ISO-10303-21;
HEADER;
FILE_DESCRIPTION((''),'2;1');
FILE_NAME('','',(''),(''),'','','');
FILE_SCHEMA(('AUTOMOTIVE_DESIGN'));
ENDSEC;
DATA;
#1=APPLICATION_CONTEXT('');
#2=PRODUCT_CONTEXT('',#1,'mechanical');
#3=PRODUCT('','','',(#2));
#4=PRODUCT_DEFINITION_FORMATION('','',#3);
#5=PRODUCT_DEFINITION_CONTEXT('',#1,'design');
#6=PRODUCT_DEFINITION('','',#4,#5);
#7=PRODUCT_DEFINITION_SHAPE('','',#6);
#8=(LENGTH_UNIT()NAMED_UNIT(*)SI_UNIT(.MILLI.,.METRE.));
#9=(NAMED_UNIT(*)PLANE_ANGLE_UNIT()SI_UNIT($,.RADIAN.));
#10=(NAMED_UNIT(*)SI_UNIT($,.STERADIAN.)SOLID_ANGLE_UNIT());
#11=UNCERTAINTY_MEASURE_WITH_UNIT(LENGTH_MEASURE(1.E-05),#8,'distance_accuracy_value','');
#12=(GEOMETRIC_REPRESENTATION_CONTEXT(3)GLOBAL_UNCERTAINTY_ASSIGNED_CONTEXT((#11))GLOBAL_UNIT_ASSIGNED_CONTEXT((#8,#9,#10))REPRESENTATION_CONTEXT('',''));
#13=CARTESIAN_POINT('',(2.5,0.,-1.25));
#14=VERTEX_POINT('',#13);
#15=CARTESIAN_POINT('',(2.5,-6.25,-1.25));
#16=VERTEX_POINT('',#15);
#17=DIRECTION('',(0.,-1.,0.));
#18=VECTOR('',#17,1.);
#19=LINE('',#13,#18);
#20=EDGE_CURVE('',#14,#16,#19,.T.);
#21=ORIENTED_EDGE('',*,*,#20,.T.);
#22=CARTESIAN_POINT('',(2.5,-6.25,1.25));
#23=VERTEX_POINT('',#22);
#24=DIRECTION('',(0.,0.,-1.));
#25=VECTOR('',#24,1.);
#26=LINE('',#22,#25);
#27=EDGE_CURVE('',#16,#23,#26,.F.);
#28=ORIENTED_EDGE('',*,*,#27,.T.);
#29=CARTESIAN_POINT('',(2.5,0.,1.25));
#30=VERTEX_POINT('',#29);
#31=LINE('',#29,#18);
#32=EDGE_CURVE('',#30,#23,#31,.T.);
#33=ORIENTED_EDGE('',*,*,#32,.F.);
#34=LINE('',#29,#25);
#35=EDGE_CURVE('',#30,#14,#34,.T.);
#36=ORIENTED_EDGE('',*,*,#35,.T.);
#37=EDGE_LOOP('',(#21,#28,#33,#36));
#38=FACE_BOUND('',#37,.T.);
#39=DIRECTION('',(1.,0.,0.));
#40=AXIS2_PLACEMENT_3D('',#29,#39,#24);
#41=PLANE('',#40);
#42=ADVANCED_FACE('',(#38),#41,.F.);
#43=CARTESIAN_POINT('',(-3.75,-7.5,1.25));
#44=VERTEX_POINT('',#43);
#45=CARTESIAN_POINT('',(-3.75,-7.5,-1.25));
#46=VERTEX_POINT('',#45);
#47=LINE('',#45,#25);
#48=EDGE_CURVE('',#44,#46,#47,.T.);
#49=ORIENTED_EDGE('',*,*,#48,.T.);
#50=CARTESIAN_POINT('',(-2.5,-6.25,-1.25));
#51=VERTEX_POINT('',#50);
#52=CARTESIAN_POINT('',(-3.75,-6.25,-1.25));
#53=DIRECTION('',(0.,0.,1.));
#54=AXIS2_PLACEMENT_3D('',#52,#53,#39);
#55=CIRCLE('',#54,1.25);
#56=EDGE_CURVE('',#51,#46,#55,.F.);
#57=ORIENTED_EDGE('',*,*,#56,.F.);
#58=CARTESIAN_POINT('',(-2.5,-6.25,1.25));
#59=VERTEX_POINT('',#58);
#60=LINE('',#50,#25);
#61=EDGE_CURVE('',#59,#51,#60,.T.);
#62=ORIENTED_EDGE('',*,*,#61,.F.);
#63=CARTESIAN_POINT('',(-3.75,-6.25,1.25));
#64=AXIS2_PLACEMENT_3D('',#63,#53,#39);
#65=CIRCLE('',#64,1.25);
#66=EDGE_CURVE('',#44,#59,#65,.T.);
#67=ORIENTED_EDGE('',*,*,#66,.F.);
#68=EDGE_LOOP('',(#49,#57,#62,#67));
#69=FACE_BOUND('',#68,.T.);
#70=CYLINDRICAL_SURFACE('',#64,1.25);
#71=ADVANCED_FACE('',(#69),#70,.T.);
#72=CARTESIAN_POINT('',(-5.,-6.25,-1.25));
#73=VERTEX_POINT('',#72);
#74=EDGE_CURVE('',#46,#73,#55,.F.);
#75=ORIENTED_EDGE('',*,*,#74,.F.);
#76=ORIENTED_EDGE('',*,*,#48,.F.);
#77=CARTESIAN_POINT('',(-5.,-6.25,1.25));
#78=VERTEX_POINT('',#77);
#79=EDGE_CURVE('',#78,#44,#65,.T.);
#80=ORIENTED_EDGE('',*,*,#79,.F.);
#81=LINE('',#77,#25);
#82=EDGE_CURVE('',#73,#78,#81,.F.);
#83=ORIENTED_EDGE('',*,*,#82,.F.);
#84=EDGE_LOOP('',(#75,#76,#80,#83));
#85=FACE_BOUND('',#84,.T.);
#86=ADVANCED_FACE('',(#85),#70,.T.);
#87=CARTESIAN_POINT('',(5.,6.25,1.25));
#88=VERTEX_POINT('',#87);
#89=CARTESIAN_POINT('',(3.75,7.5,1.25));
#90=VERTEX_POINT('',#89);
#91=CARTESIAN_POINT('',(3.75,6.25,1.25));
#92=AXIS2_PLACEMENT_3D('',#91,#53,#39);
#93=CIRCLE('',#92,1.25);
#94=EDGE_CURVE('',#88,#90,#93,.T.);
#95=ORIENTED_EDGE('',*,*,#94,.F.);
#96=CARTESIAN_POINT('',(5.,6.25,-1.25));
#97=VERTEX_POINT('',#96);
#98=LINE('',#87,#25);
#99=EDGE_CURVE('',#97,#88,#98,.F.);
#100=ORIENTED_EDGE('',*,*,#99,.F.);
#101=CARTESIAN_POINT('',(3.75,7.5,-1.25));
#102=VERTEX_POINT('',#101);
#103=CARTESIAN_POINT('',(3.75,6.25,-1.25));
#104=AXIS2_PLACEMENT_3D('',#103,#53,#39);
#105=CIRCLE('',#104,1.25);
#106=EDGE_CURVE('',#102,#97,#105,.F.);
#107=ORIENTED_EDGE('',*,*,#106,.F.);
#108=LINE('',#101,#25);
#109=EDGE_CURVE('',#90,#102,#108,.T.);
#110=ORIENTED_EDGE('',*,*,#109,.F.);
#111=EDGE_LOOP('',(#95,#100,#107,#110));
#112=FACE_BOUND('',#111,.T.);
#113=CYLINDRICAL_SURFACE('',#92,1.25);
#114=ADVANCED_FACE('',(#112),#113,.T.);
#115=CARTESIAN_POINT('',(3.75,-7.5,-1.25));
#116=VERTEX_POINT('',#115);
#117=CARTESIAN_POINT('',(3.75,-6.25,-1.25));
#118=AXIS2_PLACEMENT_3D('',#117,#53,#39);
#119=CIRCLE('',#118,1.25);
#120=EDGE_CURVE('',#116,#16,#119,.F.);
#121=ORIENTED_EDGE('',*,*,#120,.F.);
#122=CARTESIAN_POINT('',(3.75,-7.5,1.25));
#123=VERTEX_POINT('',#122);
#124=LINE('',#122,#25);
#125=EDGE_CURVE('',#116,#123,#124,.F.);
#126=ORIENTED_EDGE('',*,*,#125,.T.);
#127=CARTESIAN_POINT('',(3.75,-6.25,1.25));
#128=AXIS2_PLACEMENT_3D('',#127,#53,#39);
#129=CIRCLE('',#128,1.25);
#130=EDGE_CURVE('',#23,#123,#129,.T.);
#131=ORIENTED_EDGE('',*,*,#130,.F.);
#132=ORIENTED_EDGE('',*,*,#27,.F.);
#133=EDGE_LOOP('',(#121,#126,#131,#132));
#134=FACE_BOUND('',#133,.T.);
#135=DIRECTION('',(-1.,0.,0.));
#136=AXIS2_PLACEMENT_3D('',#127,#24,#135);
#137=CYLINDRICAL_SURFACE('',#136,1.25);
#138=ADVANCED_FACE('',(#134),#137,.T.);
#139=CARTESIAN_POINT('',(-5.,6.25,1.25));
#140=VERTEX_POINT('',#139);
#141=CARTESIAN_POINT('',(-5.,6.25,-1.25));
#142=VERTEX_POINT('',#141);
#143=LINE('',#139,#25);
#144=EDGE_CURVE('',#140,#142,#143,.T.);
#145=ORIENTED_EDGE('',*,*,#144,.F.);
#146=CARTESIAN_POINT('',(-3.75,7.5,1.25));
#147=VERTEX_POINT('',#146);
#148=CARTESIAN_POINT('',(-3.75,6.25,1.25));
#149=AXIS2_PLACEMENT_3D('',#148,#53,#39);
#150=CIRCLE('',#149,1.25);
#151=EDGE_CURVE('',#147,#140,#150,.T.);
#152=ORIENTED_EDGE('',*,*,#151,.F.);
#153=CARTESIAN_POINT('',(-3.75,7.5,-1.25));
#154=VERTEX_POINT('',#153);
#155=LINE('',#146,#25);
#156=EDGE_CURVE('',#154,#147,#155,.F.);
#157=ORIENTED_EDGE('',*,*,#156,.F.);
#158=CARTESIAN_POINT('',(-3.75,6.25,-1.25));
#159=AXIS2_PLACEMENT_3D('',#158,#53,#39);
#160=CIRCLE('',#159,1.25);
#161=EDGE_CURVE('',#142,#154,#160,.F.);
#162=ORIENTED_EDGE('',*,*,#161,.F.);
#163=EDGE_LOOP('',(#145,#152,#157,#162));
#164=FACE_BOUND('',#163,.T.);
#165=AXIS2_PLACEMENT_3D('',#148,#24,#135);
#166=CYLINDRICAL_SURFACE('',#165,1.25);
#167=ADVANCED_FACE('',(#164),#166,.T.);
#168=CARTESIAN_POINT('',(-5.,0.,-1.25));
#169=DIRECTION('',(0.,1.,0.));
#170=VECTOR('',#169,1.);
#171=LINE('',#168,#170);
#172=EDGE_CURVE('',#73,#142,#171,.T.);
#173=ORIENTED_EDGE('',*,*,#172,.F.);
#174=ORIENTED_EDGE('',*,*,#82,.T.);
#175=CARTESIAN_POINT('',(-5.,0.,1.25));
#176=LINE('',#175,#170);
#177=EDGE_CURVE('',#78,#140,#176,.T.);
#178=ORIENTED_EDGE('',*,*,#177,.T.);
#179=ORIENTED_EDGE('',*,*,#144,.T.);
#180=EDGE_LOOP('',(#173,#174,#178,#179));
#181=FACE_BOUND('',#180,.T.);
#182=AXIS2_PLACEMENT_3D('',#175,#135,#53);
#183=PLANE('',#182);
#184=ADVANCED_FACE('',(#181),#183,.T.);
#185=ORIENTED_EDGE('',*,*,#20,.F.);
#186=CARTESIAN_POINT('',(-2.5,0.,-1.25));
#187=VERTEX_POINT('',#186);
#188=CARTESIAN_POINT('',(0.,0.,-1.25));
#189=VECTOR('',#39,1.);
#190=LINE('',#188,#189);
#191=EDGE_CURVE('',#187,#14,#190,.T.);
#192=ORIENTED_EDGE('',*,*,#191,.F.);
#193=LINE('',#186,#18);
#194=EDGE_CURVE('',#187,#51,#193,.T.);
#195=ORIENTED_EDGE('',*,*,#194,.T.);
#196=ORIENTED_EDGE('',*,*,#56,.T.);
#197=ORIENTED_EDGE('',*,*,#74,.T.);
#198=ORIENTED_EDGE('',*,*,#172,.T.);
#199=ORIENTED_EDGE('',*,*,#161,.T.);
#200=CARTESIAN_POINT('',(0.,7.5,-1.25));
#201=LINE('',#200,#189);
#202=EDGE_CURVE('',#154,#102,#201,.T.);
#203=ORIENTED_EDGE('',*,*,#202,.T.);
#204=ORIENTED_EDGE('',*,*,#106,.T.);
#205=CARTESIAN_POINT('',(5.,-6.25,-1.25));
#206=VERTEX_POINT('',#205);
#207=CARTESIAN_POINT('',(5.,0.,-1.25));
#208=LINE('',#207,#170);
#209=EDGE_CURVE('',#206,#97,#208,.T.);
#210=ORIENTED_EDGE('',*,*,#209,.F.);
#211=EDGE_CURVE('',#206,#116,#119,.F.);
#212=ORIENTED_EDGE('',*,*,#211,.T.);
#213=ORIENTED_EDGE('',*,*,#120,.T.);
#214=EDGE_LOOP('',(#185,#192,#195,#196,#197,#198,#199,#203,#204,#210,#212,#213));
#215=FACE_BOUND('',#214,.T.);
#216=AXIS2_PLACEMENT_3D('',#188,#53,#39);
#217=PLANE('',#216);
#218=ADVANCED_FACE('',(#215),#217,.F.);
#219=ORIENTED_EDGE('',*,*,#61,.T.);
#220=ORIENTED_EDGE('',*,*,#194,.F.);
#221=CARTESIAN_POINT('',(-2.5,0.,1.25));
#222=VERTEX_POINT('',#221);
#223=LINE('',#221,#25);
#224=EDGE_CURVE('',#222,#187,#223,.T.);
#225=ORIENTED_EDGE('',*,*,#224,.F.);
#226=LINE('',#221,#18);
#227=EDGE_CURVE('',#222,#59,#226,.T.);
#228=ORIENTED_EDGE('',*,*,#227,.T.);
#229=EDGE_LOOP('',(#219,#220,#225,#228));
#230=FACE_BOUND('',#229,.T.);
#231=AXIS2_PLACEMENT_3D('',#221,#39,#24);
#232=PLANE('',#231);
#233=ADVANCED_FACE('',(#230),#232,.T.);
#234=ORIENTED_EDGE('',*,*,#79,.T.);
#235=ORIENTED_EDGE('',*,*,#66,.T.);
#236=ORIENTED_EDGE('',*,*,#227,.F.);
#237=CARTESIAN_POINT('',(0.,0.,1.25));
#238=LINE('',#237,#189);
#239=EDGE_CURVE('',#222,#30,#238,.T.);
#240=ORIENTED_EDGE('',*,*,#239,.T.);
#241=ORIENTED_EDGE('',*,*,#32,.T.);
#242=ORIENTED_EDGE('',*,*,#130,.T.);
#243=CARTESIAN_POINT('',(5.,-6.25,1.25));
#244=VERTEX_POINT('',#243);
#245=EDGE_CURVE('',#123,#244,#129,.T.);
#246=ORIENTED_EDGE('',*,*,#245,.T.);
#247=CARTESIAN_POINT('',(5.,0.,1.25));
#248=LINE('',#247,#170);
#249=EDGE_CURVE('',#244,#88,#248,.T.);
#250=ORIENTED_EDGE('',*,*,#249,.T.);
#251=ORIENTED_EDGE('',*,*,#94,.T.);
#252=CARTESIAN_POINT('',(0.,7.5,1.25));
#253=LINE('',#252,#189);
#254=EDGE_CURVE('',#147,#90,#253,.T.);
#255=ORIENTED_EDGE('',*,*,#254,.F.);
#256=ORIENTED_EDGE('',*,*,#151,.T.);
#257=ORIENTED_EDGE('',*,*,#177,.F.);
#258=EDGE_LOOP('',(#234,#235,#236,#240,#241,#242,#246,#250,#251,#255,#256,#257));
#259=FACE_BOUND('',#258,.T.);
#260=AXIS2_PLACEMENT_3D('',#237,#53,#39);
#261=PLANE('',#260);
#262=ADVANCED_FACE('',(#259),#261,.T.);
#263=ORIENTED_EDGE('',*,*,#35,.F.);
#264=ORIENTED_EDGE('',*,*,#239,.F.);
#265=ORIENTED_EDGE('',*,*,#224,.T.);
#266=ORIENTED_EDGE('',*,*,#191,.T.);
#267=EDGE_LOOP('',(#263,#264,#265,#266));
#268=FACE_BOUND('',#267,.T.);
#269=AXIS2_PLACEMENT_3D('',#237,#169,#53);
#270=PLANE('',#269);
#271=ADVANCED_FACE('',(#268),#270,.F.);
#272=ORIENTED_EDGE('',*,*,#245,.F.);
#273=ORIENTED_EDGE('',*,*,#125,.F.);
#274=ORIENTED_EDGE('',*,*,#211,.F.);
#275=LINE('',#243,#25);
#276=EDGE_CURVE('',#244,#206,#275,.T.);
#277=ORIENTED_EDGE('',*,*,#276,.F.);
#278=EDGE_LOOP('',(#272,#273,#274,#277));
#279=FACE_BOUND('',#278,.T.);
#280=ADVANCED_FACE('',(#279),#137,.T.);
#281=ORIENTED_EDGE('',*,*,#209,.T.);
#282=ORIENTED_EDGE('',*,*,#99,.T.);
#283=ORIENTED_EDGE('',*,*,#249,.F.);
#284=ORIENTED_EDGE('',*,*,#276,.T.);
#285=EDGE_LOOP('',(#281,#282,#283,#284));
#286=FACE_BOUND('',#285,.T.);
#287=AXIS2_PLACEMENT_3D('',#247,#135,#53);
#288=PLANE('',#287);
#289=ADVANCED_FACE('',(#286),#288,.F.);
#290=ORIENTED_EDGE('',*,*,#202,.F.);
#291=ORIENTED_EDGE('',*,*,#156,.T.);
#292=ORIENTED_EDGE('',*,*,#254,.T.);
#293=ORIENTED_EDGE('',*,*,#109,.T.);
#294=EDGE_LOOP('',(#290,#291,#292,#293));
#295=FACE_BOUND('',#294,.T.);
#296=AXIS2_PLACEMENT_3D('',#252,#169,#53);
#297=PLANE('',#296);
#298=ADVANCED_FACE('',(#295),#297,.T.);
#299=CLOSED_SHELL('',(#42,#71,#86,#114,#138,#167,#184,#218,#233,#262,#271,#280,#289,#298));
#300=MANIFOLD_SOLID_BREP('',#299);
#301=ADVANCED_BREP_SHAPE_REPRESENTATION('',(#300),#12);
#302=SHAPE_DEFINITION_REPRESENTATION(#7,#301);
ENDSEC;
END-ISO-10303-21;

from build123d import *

# Parameters (mm, degrees)
BOSS_EXTRUDE1_DEPTH = 1.25
FILLET1_R           = 1.25


with BuildPart() as part:
    # Sketch1 → Boss-Extrude1 (new, symmetric)
    with BuildSketch(Plane.XY):
        Polygon((-5, 7.5), (-5, -7.5), (-2.5, -7.5), (-2.5, 0), (2.5, 0), (2.5, -7.5), (5, -7.5), (5, 7.5), align=None)
    extrude(amount=BOSS_EXTRUDE1_DEPTH, both=True)

    # Fillet1
    fillet1_edges = [part.edges().sort_by_distance(p)[0] for p in [
        (-2.5, -7.5, 0),
        (-5, -7.5, 0),
        (-5, 7.5, 0),
        (5, 7.5, 0),
        (2.5, -7.5, 0),
        (5, -7.5, 0),
    ]]
    fillet(fillet1_edges, radius=FILLET1_R - 0.0001)  # a hair under: the kernel refuses the full size


solid = part.part
